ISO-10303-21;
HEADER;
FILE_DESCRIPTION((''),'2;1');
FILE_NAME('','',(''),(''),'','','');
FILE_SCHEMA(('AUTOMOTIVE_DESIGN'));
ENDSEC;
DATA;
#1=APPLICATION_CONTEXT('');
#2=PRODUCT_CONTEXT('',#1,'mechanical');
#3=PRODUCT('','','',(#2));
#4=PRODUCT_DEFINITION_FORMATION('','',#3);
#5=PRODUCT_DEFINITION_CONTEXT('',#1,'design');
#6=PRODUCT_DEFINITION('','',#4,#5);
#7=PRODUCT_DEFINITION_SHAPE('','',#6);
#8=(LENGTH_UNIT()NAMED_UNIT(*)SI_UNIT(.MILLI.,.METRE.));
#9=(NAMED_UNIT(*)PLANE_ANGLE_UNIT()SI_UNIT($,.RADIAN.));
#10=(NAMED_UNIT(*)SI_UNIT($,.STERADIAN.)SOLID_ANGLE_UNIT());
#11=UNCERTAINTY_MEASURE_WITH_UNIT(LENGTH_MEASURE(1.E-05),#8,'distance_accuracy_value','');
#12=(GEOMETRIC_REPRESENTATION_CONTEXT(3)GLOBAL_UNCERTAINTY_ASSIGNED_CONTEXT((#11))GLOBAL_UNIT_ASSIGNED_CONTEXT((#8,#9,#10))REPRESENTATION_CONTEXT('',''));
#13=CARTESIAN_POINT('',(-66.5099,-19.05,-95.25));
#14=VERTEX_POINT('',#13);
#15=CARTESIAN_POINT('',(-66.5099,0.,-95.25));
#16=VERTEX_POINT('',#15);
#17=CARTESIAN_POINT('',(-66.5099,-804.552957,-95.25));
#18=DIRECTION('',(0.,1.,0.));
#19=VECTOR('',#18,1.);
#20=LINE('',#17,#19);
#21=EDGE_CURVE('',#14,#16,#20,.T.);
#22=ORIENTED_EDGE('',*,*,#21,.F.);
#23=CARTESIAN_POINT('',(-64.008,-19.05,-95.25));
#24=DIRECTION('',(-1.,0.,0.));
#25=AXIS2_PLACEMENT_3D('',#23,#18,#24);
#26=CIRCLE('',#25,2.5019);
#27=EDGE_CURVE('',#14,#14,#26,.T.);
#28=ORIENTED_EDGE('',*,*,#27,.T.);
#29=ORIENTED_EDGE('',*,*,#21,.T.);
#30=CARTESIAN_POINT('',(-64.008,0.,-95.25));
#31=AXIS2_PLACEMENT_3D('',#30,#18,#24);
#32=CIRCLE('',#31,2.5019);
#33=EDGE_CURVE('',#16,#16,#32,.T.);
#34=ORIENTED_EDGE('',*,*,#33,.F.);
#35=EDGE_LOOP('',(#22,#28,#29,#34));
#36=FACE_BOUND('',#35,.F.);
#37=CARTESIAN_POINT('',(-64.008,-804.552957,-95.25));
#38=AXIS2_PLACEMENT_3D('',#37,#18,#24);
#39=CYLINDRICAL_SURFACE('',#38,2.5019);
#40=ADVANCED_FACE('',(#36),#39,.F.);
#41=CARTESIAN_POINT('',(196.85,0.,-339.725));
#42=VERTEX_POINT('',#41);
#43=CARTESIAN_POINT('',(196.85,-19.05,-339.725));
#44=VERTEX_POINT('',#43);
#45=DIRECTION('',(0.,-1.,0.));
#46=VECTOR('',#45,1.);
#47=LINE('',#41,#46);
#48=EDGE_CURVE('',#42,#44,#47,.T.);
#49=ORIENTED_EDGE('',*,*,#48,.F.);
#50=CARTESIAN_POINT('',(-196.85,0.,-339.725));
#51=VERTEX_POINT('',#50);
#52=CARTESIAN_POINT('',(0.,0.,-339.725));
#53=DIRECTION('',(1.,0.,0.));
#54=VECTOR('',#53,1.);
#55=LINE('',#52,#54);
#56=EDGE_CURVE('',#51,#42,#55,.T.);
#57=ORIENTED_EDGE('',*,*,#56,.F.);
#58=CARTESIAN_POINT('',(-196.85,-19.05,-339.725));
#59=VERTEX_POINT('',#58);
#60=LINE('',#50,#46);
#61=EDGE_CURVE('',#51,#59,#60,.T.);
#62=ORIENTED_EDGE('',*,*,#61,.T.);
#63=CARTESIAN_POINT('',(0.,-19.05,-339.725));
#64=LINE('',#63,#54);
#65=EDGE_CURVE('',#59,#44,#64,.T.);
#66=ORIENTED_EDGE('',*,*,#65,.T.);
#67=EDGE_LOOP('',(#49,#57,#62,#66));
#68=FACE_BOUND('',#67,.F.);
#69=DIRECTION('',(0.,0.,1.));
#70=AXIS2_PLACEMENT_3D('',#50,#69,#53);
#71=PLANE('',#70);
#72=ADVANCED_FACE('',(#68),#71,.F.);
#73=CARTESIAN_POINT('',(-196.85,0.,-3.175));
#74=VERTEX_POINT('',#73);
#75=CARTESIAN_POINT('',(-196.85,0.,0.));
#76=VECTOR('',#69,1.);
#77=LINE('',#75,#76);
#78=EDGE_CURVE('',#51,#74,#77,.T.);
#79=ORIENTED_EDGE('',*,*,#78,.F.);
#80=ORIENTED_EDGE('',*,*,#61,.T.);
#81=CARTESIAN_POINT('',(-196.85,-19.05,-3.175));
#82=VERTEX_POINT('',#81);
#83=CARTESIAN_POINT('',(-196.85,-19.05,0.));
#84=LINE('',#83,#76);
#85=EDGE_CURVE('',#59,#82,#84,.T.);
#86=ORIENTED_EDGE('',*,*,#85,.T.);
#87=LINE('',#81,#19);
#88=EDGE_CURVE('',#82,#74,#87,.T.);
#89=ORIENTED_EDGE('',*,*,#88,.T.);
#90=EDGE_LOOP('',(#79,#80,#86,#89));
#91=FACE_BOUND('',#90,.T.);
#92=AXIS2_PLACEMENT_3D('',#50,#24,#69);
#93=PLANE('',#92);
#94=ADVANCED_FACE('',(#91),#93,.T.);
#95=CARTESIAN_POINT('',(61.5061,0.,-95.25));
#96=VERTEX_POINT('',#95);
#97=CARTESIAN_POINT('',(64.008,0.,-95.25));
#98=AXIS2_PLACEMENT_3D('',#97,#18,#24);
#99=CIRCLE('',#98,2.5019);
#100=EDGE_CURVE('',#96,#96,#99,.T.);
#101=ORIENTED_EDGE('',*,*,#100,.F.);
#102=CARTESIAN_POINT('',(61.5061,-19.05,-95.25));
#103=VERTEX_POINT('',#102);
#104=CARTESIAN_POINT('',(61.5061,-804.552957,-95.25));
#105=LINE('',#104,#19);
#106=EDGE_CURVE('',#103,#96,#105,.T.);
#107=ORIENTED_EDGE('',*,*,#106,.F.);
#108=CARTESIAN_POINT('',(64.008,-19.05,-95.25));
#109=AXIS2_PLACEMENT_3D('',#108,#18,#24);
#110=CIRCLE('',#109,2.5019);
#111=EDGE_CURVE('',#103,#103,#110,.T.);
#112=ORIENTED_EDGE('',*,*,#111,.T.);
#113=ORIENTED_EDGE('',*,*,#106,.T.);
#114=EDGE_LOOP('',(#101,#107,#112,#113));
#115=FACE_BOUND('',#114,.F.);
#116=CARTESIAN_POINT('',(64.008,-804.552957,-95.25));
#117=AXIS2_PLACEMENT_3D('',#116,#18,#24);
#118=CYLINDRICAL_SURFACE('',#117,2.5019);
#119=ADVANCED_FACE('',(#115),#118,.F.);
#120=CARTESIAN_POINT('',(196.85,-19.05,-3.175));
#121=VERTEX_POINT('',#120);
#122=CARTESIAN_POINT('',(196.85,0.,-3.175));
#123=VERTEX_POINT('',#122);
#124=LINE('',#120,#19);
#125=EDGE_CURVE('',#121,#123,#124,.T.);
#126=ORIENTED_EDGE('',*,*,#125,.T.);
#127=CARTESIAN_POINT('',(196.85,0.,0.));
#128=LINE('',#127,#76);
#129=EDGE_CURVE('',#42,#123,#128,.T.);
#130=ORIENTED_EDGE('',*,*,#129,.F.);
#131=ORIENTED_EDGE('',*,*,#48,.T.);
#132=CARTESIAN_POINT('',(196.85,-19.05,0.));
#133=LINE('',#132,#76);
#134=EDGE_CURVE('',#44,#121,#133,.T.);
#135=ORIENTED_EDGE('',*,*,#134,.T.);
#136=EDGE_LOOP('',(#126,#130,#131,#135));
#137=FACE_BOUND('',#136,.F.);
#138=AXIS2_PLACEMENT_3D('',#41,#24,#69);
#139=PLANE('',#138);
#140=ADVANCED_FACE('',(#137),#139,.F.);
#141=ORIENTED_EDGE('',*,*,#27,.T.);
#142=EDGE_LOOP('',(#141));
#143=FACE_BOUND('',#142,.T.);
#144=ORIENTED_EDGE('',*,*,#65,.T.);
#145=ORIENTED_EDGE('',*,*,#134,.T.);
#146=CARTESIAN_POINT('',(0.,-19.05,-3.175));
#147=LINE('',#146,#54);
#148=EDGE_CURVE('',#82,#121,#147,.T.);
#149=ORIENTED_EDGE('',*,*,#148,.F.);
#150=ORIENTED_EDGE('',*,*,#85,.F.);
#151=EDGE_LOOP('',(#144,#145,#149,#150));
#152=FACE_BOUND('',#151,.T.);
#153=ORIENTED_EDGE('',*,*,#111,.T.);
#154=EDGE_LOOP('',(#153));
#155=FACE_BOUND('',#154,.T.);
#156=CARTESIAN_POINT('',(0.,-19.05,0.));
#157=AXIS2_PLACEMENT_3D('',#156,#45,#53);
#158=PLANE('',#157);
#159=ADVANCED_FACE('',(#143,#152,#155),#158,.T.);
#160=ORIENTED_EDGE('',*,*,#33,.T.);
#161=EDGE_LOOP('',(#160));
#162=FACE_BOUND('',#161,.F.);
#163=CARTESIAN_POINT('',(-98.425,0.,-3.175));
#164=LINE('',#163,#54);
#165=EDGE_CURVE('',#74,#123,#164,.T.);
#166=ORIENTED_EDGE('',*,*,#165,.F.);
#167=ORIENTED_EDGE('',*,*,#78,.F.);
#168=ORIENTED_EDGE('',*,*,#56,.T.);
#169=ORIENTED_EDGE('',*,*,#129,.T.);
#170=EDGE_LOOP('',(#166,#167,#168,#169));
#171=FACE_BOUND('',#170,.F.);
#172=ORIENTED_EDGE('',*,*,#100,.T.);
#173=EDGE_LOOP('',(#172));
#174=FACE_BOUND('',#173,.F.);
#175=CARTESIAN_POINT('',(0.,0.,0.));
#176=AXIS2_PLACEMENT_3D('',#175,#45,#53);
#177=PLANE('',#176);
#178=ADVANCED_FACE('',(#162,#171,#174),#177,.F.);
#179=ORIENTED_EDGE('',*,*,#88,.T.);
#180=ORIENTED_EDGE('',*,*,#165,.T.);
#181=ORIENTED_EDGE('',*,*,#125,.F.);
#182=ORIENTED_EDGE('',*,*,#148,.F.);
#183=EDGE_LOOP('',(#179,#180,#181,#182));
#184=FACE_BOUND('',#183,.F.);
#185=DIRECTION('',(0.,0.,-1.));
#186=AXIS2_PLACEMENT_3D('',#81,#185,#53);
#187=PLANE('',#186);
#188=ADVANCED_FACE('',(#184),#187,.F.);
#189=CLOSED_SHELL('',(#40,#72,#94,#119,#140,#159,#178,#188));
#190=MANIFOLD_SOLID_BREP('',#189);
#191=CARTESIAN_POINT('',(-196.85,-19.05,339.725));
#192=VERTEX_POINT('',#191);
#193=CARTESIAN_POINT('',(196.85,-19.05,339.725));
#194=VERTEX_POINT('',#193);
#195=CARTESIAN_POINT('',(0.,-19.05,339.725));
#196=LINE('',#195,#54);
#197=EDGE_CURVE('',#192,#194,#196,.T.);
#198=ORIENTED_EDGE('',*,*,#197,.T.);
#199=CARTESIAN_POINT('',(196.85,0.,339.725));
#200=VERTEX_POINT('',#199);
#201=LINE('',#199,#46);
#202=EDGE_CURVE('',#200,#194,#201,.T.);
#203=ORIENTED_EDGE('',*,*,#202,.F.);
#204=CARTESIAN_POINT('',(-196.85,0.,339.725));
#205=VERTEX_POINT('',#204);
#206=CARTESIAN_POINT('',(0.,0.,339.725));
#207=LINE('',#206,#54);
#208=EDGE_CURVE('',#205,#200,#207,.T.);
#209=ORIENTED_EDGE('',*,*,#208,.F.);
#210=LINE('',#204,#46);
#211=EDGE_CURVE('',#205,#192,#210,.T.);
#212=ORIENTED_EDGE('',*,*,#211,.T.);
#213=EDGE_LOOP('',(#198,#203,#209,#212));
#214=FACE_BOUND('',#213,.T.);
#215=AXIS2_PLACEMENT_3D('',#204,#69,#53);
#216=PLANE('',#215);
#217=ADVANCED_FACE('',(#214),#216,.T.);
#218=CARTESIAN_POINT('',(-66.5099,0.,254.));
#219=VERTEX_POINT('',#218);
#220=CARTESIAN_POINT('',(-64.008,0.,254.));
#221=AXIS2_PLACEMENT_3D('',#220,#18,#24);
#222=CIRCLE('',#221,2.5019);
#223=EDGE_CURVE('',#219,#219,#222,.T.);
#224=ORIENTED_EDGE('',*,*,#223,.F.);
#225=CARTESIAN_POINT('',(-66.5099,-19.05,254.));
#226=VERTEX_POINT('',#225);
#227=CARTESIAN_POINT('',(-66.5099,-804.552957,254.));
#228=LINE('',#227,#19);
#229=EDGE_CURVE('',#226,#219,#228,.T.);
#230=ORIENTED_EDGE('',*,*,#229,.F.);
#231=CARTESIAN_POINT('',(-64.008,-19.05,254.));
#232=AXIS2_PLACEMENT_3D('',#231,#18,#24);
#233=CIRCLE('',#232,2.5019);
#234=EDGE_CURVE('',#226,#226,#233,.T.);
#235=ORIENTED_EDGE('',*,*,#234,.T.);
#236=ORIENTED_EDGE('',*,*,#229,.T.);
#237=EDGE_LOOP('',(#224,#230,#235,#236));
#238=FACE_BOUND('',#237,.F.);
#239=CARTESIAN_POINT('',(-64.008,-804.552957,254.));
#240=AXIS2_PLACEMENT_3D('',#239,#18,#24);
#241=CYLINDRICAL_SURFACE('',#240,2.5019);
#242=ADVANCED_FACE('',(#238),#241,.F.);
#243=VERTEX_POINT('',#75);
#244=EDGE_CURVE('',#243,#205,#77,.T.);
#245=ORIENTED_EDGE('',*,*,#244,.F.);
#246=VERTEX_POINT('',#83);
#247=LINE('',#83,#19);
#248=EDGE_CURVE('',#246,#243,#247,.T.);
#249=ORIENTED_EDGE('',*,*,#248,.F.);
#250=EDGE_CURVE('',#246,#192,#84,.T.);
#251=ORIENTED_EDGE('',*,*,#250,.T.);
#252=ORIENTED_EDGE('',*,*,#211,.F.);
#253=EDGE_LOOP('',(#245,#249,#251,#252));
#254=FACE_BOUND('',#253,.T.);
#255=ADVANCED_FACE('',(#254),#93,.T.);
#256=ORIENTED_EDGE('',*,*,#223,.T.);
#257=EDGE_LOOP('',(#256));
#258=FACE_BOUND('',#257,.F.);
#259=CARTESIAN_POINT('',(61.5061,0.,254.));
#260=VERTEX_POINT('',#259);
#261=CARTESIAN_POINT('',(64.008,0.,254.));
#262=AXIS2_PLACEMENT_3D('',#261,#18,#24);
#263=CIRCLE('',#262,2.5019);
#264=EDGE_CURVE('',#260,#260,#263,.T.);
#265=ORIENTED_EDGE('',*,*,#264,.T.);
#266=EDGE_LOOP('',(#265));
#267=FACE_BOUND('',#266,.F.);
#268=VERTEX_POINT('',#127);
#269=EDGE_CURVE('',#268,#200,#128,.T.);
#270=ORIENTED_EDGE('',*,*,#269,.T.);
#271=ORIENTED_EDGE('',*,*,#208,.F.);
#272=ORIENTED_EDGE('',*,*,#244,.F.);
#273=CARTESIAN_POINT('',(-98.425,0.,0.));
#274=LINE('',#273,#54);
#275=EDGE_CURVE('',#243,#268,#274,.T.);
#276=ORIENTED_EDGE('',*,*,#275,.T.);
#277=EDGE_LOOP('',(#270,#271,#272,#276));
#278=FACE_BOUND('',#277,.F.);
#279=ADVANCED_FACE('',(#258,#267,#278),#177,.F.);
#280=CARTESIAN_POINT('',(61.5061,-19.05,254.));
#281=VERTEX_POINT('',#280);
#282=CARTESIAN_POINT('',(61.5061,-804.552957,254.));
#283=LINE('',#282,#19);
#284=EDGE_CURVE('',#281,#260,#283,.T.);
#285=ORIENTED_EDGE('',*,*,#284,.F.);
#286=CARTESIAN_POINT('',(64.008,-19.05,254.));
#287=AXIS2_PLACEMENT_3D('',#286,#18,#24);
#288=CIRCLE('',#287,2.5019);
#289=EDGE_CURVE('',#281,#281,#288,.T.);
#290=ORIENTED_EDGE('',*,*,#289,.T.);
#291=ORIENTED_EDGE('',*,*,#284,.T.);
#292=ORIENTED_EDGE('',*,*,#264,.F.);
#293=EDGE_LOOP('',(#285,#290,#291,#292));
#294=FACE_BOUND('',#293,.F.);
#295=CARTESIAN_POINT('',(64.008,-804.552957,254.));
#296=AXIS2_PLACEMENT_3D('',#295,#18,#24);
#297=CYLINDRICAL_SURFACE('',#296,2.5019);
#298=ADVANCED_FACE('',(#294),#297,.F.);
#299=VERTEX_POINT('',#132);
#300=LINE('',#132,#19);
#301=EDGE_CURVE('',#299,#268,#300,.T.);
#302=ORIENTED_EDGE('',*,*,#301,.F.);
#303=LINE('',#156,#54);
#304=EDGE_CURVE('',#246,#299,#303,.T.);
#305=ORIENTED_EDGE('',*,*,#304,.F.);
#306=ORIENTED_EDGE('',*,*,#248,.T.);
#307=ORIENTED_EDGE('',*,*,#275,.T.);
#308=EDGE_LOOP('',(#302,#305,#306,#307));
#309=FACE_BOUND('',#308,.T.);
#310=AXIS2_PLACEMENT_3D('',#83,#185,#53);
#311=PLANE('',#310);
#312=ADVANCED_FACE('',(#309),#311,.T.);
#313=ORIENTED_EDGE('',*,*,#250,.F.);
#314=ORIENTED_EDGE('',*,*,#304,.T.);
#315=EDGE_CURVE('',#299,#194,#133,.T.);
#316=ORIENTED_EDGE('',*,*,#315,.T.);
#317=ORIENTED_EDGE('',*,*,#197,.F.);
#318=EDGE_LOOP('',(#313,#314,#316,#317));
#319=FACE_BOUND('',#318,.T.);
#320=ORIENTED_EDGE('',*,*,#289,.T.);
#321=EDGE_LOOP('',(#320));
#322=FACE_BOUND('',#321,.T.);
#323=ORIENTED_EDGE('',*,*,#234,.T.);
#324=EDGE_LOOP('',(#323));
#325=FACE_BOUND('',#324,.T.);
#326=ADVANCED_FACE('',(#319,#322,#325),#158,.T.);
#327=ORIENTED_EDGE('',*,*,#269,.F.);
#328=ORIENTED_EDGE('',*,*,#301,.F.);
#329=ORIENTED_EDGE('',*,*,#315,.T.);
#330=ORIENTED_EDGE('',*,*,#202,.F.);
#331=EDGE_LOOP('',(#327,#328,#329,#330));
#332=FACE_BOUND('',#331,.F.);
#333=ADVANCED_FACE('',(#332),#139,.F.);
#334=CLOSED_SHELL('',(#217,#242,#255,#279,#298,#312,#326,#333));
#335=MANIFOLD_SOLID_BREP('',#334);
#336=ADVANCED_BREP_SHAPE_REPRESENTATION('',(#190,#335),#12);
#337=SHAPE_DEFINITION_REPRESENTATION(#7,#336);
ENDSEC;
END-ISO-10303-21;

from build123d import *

# Parameters (mm, degrees)
F0_W     = 393.7
F0_H     = 679.45
F1_DEPTH = 19.05
F2_W     = 393.7
F2_H     = 3.175
F3_DEPTH = 25.4
F5_D     = 5.0038
F7_D     = 5.0038


# Not quite as in the source:
# - a feature names something its author has since deleted; it is built from what else it names


with BuildPart() as f1:
    # F0 (on Front) → F1 (new body)
    with BuildSketch(Plane.XZ):
        Rectangle(F0_W, F0_H)
    extrude(amount=F1_DEPTH)

    # F2 (on face) → F3 (cut)
    with BuildSketch(Plane.XZ.offset(19.05)):
        with Locations((0, -1.5875)):
            Rectangle(F2_W, F2_H)
    extrude(amount=-F3_DEPTH, mode=Mode.SUBTRACT)

    # F5 (through all)
    with Locations(Plane.XZ.offset(19.05)):
        with Locations((-64.008, 254), (64.008, 254)):
            Hole(F5_D / 2)

    # F7 (through all)
    with Locations(Plane.XZ.offset(19.05)):
        with Locations((64.008, -95.25), (-64.008, -95.25)):
            Hole(F7_D / 2)


solid = f1.part
